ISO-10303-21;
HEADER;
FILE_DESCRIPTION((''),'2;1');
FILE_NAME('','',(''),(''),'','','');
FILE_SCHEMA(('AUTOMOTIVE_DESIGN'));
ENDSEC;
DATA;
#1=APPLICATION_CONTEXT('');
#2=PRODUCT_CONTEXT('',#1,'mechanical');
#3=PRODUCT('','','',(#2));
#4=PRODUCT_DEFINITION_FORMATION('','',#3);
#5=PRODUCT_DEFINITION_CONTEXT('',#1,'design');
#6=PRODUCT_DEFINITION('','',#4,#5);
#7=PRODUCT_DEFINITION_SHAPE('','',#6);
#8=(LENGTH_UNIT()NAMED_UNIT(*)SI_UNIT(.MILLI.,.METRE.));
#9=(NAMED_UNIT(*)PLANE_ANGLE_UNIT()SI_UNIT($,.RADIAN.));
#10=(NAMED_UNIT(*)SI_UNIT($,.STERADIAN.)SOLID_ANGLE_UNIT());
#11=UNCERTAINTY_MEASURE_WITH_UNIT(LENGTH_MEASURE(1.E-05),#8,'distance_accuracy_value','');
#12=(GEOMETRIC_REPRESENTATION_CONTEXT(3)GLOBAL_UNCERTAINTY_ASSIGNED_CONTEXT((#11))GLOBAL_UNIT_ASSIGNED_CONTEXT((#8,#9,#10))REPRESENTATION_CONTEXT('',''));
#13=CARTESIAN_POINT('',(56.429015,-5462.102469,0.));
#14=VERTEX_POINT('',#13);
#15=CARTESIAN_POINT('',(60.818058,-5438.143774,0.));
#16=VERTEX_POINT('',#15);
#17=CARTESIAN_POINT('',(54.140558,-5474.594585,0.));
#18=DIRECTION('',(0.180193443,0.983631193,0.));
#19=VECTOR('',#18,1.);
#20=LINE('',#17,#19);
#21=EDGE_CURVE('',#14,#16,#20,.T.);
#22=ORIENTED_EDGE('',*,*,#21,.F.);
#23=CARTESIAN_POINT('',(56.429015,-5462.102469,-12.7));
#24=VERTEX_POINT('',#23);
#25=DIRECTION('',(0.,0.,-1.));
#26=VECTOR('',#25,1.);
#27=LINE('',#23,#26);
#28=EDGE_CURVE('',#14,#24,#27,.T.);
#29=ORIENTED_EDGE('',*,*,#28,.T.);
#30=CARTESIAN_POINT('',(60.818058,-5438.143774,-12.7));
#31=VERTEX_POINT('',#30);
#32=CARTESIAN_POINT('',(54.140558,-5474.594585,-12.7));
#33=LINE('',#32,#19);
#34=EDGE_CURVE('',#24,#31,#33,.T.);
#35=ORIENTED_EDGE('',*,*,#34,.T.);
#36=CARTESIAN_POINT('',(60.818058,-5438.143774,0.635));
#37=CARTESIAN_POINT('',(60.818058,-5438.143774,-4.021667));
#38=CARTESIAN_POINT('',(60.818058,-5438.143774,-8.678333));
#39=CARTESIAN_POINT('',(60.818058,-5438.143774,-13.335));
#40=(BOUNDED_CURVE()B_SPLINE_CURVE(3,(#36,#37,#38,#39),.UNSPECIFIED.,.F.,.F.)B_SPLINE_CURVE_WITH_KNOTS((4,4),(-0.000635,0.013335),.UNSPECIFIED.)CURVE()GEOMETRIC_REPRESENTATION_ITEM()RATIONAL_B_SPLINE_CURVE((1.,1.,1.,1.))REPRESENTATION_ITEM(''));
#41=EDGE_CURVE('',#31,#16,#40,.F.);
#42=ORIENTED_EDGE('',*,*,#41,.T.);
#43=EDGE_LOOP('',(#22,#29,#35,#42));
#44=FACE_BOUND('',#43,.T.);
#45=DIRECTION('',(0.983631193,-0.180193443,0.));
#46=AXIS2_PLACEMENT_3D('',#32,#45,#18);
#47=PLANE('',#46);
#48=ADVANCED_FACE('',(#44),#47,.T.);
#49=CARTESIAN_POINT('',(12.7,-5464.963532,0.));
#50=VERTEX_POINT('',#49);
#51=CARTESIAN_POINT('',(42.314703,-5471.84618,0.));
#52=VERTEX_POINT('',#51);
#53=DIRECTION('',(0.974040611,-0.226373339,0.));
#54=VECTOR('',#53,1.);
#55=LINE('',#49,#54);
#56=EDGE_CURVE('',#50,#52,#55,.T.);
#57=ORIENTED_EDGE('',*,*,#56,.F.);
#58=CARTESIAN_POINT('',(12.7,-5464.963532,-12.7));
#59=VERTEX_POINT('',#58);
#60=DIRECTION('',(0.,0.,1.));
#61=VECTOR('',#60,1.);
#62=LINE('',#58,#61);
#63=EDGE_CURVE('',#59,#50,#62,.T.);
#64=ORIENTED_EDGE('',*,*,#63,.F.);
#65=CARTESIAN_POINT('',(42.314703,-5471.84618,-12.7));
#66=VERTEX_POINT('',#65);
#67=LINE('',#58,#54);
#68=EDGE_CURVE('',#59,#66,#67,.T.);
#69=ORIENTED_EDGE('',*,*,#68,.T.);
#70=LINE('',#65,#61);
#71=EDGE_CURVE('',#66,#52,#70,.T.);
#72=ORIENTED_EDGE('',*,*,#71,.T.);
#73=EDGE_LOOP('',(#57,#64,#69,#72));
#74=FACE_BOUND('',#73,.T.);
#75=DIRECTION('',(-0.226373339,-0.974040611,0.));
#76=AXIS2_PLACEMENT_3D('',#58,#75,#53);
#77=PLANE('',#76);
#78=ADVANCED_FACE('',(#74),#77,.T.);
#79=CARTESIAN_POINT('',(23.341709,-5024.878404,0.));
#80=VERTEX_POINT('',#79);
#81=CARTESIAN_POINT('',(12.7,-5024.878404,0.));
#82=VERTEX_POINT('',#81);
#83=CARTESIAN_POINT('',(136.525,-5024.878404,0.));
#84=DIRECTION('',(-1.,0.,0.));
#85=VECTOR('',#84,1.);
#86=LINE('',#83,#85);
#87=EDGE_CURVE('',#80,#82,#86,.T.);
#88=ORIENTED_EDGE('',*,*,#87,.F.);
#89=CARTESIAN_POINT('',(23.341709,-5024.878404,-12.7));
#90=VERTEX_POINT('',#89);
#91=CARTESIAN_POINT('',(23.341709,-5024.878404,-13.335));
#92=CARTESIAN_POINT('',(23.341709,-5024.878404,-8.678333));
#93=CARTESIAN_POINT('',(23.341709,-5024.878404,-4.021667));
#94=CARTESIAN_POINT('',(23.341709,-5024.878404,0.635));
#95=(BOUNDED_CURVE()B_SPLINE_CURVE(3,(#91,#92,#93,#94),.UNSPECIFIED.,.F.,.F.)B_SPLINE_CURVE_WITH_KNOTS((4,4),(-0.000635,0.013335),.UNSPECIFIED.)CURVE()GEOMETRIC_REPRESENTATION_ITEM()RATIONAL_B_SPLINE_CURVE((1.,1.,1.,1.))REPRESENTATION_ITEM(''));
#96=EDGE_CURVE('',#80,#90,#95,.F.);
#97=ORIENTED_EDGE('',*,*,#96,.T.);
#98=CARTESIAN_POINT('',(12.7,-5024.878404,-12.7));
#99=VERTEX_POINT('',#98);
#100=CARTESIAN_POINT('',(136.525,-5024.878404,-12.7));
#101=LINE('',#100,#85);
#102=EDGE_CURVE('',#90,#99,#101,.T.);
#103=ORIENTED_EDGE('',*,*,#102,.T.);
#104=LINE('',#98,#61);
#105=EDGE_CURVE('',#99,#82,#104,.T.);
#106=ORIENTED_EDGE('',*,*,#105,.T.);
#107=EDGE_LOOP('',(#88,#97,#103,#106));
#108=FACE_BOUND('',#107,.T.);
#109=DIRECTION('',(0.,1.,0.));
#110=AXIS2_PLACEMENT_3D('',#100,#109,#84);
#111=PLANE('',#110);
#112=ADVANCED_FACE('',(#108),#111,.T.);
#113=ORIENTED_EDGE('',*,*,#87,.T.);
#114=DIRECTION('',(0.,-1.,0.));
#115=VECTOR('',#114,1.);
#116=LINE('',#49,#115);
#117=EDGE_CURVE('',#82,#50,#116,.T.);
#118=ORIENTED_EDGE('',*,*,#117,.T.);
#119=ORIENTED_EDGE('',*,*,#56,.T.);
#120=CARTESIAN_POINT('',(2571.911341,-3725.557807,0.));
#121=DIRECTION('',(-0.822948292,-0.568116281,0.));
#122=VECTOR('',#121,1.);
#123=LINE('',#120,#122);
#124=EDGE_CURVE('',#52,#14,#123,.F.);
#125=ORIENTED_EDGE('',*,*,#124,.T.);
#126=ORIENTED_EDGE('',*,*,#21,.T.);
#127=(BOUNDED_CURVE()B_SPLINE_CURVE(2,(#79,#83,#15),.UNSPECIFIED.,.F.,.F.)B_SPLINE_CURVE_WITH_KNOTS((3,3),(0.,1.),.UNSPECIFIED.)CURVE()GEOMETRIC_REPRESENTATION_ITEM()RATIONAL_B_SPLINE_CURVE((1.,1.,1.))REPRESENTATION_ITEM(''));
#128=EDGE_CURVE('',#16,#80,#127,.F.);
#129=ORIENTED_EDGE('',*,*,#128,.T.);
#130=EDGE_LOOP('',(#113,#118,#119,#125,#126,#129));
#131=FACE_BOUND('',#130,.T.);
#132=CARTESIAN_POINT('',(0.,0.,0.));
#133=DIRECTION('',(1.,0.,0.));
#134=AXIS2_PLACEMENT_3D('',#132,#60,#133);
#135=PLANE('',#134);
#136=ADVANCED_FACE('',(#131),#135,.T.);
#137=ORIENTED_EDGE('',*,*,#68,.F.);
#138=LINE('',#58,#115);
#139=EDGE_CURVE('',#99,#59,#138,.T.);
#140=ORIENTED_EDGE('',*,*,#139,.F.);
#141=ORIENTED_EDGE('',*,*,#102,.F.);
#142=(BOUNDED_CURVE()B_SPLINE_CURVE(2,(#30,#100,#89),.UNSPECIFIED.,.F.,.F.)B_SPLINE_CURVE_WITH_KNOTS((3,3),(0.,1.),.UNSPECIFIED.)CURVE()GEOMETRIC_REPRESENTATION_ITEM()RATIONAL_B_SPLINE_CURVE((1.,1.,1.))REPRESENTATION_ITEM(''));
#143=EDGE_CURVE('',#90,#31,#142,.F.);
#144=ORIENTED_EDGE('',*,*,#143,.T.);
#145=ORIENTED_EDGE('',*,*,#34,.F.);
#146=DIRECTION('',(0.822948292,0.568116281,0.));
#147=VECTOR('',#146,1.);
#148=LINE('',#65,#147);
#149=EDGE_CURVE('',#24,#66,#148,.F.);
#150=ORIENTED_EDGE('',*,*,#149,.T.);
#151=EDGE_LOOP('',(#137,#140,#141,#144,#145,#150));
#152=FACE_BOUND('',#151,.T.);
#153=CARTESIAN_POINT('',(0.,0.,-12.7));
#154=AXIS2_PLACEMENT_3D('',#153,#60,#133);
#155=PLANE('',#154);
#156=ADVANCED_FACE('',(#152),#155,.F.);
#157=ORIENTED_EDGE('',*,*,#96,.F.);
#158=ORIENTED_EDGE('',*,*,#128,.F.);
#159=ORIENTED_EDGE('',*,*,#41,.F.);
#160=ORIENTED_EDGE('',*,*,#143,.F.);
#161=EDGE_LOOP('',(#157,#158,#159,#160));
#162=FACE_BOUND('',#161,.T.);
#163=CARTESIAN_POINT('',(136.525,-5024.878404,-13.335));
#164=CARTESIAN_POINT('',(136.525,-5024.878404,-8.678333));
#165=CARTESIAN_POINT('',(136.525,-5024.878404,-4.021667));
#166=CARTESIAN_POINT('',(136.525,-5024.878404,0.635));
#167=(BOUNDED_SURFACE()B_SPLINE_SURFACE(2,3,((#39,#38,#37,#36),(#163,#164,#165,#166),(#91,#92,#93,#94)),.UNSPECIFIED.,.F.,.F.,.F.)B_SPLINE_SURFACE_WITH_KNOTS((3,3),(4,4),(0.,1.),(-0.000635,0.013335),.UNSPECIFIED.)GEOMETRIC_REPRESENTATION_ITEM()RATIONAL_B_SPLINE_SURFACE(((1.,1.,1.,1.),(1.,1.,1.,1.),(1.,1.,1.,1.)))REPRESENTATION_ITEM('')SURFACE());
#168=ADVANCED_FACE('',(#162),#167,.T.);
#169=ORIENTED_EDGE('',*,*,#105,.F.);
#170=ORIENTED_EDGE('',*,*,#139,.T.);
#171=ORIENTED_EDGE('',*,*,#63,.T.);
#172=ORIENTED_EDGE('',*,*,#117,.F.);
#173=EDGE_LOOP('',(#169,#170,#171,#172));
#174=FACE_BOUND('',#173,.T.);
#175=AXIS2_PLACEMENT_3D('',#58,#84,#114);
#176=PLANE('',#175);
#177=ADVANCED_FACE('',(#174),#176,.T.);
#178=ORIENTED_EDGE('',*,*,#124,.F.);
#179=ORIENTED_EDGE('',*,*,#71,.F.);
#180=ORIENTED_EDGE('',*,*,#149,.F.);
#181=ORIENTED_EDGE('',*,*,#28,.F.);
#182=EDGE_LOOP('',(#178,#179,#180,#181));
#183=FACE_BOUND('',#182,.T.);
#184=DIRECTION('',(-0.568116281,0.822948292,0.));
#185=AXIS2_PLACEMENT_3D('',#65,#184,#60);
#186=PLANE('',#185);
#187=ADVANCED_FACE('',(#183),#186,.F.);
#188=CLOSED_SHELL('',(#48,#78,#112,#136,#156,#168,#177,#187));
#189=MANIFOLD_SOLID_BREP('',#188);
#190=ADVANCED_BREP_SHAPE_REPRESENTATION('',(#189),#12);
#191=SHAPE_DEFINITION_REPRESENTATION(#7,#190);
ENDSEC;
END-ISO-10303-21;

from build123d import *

# Parameters (mm, degrees)
BOSS_EXTRUDE1_DEPTH = 12.7
CHAMFER1_SIZE       = 12.7
CHAMFER1_SIZE2      = 12.14102868


with BuildPart() as part:
    # Sketch2 → Boss-Extrude1 (new body)
    with BuildSketch(Plane.XY):
        Polygon((12.7, -5464.963531619), (54.140557785, -5474.594585325), (136.525, -5024.878404071), (12.7, -5024.878404071), align=None)
    extrude(amount=-BOSS_EXTRUDE1_DEPTH)

    # Fillet1
    # a fillet whose section is not a circle: 406.4, 38.1 mm, written as the material it takes off along each edge
    with BuildSketch(Plane(origin=(136.525, -5024.878404071, 1050.356508865), x_dir=(-0.18019344316526917, -0.9836311925921447, 0), z_dir=(0, 0, -1))) as fillet1_piece_1:
        with BuildLine():
            Bezier((420.142603546, 0), (0, 0), (20.394886876, 111.330615302), weights=[1, 1, 1])
            Line((20.394886876, 111.330615302), (0, 0))
            Line((0, 0), (420.142603546, 0))
        make_face()
    extrude(amount=2113.413017729, mode=Mode.SUBTRACT)

    # Chamfer1
    chamfer1_edges = [part.edges().sort_by_distance(p)[0] for p in [
        (54.140557785, -5474.594585325, -6.35),
    ]]
    chamfer1_side = [part.faces().sort_by_distance(p)[0] for p in [
        (57.479307716, -5456.36917979, -6.35),
    ]]
    chamfer(chamfer1_edges, length=CHAMFER1_SIZE, length2=CHAMFER1_SIZE2, reference=chamfer1_side[0])


solid = part.part
